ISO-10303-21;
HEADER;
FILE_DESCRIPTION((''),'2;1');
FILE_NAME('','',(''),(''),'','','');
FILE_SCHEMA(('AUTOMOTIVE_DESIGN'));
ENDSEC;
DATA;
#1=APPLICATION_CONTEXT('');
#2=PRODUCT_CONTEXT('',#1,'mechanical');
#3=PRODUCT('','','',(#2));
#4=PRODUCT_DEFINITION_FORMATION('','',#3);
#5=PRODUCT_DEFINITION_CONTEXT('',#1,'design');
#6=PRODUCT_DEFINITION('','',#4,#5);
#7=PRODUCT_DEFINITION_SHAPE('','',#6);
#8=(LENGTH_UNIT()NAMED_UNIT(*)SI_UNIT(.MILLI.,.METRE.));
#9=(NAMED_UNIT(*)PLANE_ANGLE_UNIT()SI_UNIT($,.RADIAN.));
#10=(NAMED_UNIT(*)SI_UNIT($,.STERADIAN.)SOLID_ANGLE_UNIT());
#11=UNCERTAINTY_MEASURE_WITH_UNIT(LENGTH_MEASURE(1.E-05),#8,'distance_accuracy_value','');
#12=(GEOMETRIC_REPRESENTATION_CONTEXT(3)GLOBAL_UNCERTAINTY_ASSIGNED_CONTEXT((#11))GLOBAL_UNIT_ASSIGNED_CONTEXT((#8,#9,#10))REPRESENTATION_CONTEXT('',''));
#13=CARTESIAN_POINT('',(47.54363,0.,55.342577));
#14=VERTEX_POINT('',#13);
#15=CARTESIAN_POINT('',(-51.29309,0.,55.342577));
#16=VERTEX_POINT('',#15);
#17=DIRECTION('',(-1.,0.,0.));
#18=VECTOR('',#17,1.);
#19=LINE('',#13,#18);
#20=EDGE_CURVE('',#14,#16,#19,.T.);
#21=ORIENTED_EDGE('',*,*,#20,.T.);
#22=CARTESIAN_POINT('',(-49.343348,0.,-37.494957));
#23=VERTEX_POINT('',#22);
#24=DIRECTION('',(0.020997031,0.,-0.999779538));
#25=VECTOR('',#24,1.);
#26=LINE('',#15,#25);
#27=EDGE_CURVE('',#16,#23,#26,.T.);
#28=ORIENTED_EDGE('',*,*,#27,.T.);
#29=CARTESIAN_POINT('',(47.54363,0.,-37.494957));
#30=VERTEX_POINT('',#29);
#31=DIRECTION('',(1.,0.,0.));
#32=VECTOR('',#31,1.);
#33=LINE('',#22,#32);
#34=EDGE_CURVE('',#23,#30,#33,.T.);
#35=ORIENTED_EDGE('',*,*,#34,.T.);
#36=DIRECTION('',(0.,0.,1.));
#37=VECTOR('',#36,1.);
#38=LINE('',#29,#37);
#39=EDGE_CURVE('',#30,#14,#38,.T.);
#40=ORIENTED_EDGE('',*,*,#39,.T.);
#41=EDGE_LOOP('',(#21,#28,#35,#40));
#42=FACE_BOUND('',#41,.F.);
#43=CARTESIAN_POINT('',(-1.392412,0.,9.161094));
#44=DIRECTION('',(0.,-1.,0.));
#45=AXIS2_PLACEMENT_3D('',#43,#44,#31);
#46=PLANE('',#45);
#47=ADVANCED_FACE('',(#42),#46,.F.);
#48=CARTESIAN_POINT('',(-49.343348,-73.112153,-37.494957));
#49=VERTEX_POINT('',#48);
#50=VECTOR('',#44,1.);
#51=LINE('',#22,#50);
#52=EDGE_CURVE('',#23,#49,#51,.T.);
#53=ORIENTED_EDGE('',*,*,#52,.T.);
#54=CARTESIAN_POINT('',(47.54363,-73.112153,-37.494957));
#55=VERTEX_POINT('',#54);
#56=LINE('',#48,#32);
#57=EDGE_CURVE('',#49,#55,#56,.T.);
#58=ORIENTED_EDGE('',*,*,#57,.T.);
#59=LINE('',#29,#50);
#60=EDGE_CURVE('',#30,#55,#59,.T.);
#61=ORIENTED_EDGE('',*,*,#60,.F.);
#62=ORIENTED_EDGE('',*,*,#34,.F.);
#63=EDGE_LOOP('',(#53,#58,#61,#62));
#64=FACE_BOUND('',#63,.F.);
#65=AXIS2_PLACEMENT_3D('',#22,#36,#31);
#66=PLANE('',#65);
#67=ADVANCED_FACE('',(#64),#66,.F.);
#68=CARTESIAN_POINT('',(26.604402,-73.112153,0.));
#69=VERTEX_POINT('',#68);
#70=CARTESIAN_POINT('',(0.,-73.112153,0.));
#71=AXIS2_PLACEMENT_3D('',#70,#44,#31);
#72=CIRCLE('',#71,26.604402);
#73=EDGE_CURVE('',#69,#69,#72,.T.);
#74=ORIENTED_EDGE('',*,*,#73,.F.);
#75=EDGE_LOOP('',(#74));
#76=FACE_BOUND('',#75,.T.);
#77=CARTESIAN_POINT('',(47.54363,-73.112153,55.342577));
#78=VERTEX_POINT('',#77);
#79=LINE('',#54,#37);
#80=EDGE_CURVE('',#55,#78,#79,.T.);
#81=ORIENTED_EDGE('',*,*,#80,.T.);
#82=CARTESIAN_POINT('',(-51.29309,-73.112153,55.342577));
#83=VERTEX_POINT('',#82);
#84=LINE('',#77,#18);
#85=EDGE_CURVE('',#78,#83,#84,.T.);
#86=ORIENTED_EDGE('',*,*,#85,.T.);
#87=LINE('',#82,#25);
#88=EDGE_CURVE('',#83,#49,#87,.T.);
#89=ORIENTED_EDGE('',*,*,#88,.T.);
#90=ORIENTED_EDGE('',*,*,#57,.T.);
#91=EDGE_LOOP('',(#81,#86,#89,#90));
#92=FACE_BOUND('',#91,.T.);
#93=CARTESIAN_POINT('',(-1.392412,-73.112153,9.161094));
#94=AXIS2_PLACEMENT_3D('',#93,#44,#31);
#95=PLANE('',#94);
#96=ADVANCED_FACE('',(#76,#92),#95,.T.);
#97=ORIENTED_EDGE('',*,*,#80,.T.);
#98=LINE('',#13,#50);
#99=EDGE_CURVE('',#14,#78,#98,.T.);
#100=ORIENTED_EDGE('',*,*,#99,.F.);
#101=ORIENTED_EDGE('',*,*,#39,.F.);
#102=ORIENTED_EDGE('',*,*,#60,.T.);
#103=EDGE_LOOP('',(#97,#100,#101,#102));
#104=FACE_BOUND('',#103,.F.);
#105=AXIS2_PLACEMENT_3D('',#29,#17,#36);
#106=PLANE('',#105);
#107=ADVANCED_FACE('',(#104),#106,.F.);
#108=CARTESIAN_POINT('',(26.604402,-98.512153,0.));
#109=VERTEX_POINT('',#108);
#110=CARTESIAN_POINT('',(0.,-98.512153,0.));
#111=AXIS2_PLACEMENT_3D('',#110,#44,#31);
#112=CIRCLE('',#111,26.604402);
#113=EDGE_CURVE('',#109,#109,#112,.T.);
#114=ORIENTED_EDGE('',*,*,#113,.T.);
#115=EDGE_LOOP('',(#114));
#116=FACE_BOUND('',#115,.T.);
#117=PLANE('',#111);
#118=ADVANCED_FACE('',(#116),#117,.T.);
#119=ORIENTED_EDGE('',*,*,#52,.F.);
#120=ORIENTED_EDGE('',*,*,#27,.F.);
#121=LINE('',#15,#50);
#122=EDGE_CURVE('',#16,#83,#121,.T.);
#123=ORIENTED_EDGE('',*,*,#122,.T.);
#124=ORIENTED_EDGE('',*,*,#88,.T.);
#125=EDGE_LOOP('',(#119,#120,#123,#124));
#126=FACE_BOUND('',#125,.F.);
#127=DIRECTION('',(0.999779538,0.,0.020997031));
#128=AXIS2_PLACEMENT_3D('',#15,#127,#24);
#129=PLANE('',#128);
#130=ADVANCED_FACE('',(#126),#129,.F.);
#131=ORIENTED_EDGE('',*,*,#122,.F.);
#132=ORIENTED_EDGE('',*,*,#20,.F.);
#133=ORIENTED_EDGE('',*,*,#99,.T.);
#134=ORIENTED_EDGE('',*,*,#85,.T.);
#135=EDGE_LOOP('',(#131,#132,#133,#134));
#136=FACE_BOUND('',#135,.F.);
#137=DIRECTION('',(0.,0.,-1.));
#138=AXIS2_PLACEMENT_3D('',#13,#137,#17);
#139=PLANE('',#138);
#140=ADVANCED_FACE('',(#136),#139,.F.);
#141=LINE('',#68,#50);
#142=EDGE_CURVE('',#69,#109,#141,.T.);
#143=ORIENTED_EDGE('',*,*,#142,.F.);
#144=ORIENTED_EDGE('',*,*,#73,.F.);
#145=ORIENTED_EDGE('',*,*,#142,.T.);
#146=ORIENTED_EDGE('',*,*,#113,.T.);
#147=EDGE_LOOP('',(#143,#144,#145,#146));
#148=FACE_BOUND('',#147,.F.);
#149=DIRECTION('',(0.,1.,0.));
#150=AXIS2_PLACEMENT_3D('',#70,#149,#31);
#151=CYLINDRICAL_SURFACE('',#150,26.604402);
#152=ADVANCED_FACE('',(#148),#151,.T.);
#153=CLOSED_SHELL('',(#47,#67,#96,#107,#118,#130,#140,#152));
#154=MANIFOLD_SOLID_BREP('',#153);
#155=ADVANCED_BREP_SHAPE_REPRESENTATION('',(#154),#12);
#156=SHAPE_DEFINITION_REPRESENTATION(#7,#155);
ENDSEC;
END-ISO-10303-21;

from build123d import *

# Parameters (mm, degrees)
F1_DEPTH = 73.1121525168
F2_R     = 26.6044020107
F3_DEPTH = 25.4


# Not quite as in the source:
# - the program builds the solid bodies; features that only make, move or delete a surface that nothing else refers to are left out


with BuildPart() as f1:
    # F0 (on Front) → F1 (new body)
    with BuildSketch(Plane.XZ):
        Polygon((-51.2930899858, 55.3425773978), (-49.3433475494, -37.4949574471), (47.5436300039, -37.4949574471), (47.5436300039, 55.3425773978), align=None)
    extrude(amount=F1_DEPTH)

    # F2 (on face) → F3 (join)
    with BuildSketch(Plane.XZ.offset(73.1121525168)):
        Circle(F2_R)
    extrude(amount=F3_DEPTH)


solid = f1.part
